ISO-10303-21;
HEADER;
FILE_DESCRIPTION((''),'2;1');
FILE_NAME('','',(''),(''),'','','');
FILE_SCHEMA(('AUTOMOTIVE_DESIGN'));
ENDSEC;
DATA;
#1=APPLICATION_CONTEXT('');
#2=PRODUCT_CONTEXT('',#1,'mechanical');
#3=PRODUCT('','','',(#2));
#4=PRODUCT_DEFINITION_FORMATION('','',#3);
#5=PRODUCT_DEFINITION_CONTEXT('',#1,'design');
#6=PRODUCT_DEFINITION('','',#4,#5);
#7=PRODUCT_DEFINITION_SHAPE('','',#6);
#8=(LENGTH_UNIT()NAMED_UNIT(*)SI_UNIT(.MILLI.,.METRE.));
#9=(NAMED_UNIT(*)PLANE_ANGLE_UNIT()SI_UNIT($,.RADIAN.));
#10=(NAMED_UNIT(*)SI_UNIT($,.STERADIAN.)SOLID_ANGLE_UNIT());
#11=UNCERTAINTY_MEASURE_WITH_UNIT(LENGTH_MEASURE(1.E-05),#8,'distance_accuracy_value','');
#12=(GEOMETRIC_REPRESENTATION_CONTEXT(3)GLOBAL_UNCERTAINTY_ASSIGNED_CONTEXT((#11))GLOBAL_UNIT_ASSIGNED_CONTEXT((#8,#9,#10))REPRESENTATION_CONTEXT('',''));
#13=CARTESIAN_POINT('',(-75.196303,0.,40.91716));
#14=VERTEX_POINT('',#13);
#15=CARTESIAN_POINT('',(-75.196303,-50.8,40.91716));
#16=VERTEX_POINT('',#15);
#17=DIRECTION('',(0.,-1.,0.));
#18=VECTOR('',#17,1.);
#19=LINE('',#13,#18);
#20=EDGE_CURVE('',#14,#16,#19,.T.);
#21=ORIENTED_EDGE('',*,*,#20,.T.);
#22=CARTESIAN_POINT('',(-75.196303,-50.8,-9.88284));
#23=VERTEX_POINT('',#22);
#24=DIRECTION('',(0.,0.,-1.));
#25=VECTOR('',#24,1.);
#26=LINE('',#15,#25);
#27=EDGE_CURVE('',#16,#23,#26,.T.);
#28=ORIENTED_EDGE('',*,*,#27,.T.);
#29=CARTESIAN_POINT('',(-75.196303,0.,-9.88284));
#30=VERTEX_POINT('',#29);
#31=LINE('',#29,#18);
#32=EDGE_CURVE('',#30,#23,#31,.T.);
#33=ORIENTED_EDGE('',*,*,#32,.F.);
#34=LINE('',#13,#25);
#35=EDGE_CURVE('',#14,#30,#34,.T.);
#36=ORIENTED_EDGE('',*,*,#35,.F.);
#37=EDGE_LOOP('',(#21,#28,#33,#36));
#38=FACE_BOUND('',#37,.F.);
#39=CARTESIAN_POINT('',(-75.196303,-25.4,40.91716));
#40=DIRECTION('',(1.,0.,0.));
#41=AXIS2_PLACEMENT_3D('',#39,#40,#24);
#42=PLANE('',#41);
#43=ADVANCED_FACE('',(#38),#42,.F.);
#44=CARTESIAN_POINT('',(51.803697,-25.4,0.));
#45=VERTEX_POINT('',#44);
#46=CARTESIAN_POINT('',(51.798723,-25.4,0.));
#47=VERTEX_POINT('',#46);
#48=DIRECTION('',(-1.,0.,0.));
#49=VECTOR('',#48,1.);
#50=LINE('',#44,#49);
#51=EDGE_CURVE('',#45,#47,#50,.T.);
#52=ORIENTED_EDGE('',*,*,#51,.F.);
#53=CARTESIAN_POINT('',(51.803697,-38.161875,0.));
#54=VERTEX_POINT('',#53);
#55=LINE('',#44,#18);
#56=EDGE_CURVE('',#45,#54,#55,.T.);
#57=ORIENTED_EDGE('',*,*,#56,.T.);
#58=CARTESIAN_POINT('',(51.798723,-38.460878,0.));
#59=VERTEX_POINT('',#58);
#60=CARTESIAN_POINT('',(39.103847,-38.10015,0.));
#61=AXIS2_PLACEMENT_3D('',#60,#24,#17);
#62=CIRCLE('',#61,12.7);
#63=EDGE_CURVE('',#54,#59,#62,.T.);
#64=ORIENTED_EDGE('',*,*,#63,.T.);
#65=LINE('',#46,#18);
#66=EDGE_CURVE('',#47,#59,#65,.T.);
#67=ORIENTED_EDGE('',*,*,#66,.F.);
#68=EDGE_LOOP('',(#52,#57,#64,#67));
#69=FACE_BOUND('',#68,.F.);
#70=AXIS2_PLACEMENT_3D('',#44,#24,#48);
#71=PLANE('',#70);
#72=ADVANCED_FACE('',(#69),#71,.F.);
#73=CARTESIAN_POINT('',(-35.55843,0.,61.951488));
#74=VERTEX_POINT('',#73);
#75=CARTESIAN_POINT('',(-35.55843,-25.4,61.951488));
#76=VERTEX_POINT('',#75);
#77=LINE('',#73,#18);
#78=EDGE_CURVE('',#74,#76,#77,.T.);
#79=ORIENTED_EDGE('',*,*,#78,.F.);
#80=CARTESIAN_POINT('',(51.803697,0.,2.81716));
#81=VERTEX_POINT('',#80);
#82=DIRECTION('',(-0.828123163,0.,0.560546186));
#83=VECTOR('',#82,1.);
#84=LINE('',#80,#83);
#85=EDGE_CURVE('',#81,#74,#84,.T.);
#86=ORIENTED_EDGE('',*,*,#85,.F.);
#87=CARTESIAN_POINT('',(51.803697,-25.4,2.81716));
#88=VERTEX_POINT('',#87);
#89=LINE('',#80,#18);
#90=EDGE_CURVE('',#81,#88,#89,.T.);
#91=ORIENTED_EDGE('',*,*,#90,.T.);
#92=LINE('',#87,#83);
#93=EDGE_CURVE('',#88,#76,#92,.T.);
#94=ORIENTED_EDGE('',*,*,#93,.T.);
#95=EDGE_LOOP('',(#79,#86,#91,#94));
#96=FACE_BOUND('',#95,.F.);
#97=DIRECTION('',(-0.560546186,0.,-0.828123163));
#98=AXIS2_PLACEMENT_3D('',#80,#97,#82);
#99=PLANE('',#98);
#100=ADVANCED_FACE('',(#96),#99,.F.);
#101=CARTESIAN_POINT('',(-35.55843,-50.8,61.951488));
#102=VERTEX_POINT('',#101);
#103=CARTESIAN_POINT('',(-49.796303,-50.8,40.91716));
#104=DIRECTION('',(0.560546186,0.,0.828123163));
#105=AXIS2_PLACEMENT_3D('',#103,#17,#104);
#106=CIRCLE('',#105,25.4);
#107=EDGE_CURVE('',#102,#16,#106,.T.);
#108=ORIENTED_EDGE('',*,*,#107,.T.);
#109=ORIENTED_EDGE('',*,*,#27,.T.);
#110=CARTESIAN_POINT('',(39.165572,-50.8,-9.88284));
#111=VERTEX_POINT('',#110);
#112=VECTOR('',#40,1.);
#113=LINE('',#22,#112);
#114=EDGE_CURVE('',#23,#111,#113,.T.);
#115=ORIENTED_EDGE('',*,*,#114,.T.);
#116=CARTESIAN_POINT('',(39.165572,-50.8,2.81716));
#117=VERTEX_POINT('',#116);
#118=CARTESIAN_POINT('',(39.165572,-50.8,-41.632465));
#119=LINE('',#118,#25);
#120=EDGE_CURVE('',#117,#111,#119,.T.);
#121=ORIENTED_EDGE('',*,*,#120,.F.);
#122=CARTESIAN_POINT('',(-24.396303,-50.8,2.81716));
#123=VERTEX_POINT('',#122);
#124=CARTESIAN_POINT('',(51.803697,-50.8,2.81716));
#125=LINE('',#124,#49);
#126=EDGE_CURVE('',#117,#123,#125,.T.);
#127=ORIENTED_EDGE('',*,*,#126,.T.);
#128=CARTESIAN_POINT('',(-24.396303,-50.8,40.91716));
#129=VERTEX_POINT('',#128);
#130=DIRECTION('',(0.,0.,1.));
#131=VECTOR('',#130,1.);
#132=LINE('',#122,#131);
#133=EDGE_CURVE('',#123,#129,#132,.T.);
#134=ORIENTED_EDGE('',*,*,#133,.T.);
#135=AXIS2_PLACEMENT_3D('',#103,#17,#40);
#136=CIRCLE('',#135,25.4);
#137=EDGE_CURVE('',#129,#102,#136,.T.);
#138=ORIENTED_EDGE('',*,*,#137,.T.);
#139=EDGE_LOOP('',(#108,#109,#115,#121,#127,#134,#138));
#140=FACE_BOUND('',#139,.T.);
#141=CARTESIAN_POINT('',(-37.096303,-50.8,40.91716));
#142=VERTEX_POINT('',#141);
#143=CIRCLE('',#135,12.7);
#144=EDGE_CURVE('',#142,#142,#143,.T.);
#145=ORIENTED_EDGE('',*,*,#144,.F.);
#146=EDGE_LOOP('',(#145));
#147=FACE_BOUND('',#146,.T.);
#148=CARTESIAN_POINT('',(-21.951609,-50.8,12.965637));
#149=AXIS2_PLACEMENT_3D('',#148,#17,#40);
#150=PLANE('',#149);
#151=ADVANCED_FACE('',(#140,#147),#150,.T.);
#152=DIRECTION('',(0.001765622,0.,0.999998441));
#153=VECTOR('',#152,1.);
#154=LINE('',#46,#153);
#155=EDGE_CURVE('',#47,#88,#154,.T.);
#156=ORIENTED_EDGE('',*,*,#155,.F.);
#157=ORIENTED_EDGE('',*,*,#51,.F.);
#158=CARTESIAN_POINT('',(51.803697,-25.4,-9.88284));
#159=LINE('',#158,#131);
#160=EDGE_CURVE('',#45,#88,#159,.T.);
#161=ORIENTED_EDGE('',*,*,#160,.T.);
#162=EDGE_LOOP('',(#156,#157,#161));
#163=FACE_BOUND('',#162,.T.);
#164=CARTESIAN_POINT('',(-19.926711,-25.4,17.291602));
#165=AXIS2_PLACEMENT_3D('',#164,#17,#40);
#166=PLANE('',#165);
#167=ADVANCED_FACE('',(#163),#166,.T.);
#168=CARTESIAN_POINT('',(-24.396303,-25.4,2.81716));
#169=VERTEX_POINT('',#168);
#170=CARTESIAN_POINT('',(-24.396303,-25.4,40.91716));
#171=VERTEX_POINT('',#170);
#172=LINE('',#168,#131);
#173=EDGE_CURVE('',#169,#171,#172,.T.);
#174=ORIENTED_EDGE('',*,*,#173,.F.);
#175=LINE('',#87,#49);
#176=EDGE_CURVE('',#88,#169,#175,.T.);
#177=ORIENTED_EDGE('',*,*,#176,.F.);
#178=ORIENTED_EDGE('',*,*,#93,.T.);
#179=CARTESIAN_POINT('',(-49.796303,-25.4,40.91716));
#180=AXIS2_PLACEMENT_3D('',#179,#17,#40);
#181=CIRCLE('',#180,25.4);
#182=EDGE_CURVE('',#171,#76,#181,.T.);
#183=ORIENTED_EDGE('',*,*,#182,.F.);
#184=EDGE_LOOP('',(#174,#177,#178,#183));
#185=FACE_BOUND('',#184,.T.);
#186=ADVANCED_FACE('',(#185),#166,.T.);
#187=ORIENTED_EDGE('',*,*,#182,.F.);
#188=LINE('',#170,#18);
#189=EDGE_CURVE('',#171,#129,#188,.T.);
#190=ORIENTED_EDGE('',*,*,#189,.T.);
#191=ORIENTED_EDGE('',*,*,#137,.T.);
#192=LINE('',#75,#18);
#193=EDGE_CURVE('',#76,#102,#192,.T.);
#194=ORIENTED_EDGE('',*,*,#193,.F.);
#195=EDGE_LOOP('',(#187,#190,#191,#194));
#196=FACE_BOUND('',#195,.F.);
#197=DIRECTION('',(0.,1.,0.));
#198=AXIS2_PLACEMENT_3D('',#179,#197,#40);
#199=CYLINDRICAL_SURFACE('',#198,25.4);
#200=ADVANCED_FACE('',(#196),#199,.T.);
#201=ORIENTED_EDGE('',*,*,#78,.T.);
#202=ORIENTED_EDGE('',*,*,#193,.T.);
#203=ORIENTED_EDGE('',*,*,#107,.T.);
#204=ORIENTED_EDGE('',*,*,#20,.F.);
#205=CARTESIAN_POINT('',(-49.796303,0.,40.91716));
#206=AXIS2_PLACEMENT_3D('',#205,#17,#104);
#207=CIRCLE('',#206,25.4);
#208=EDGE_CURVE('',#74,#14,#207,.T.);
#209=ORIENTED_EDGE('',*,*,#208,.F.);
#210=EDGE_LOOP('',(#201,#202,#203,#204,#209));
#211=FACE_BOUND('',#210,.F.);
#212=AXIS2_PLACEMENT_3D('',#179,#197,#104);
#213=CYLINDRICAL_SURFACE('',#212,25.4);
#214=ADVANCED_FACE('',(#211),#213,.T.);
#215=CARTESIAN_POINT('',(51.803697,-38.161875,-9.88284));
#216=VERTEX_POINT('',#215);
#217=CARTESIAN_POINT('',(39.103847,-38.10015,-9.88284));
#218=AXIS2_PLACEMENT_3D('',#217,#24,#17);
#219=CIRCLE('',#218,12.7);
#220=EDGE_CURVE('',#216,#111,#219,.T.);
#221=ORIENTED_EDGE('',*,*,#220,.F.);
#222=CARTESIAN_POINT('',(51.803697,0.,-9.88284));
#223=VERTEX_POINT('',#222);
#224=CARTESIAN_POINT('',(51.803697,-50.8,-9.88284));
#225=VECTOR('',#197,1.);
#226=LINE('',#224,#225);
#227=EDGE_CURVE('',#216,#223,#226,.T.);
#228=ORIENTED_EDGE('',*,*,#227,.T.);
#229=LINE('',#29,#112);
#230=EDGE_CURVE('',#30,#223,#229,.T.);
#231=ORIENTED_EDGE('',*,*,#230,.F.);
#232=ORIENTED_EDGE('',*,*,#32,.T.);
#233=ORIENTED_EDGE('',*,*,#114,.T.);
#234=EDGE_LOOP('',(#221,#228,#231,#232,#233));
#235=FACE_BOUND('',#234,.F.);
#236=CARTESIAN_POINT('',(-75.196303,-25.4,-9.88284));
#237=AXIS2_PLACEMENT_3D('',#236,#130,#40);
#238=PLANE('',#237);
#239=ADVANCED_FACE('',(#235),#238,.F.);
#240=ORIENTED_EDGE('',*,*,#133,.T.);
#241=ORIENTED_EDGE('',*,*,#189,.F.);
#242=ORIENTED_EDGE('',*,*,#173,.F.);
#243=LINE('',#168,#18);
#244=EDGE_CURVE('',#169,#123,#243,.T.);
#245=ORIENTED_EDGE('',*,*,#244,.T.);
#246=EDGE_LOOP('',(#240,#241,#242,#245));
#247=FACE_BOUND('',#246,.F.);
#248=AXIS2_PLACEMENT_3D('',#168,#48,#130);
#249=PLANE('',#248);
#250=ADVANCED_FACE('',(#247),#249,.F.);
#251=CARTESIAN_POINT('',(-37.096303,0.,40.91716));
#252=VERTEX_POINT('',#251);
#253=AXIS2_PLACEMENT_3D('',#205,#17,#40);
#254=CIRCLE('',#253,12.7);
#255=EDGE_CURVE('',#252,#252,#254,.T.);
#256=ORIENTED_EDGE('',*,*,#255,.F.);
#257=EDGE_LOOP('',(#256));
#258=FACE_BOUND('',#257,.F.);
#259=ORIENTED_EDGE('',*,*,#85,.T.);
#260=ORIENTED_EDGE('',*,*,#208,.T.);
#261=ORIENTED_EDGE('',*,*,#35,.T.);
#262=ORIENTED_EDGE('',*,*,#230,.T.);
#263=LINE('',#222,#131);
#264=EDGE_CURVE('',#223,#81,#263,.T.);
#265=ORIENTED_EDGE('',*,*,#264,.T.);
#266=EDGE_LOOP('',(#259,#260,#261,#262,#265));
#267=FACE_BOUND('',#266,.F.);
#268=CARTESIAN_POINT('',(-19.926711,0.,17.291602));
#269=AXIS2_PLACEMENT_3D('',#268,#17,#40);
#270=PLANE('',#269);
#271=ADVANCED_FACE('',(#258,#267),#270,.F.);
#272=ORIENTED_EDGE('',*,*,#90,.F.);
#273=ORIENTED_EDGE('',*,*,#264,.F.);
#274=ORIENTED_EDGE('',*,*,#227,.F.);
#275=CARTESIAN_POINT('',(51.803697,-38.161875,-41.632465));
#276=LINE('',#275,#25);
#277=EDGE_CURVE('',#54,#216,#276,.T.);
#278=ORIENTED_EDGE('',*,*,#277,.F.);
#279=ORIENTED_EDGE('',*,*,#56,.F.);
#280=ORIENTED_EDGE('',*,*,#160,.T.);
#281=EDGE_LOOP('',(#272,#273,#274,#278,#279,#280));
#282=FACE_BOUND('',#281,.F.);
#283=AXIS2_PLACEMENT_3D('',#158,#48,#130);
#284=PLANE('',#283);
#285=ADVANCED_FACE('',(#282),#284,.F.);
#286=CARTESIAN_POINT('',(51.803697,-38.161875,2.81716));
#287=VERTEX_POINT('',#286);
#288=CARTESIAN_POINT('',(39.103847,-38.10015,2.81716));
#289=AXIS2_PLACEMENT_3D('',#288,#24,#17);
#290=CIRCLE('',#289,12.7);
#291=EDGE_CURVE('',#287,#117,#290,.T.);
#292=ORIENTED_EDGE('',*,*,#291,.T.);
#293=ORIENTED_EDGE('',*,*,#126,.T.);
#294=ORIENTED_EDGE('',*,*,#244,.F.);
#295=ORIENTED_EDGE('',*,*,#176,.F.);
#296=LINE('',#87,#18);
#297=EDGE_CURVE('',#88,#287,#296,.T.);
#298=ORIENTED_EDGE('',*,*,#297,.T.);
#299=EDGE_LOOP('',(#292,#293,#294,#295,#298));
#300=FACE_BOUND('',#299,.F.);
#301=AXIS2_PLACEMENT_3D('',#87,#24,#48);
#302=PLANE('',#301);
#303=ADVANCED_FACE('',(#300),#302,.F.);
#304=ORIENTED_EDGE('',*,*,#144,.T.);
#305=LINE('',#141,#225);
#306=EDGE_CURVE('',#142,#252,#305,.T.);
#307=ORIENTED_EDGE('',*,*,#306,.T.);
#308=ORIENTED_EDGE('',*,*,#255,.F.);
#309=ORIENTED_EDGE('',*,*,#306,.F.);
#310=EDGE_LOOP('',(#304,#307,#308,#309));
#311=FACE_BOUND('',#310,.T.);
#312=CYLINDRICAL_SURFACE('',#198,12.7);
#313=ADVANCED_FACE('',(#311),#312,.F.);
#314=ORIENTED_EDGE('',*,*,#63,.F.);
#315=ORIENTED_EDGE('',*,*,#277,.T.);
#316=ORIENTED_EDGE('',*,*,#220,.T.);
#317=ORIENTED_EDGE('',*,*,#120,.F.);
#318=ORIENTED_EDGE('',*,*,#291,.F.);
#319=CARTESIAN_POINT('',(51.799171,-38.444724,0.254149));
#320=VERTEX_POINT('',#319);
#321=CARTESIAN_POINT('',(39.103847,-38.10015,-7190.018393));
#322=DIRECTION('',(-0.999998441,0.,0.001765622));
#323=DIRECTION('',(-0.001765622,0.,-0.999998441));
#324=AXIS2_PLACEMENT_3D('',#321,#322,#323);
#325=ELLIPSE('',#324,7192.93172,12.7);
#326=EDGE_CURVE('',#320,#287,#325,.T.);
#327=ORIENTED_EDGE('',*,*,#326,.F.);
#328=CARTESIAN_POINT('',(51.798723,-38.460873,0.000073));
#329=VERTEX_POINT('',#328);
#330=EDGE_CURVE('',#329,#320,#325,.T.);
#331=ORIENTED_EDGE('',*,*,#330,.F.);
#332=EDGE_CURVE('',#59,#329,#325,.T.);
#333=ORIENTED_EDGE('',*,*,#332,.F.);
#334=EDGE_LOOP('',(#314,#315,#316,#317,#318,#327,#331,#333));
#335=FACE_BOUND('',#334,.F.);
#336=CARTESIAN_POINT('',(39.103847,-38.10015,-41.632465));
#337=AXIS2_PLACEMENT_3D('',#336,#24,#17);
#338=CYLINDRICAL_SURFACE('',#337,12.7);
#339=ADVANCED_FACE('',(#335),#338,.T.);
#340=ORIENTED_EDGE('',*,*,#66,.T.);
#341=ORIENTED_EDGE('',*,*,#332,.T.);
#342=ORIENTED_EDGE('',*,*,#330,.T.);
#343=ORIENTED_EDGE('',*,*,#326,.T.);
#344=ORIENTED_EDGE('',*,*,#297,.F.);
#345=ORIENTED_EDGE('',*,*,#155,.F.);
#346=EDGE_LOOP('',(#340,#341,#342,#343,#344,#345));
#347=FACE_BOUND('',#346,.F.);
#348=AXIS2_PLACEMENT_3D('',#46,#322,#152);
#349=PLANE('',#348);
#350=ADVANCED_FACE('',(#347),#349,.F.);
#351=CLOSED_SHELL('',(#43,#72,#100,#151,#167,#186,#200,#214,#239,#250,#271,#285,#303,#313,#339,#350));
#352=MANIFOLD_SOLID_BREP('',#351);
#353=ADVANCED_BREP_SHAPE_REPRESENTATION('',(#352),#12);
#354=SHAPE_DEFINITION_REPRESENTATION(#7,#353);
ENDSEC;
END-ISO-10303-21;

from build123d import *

# Parameters (mm, degrees)
F0_R        = 12.7
F1_DEPTH    = 25.4
F2_R        = 12.7
F3_DEPTH    = 25.4
F4_T1_DEPTH = 73.3820900713
F4_T6_DEPTH = 61.9223878104


# Not quite as in the source:
# - a fillet or chamfer that OpenCascade refuses, or shapes differently, is made with other operations: its cross-section is extruded or revolved along the edge and cut away or added


with BuildPart() as f1:
    # F0 (on Front) → F1 (new body)
    with BuildSketch(Plane.XZ):
        with BuildLine():
            Line((51.8036965728, 2.8171599331), (-35.5584302991, 61.9514882749))
            ThreePointArc((-35.5584302991, 61.9514882749), (-61.7025627589, 63.353759246), (-75.1963034272, 40.9171599331))
            Line((-75.1963034272, 40.9171599331), (-75.1963034272, -9.8828400669))
            Line((-75.1963034272, -9.8828400669), (51.8036965728, -9.8828400669))
            Line((51.8036965728, -9.8828400669), (51.8036965728, 2.8171599331))
        make_face()
        with Locations((-49.7963034272, 40.9171599331)):
            Circle(F0_R, mode=Mode.SUBTRACT)
    extrude(amount=F1_DEPTH)

    # F2 (on face) → F3 (join)
    with BuildSketch(Plane.XZ.offset(25.4)):
        with BuildLine():
            Line((-24.3963034272, 2.8171599331), (-24.3963034272, 40.9171599331))
            ThreePointArc((-24.3963034272, 40.9171599331), (-27.3597041143, 52.8234192648), (-35.5584302991, 61.9514882749))
            ThreePointArc((-35.5584302991, 61.9514882749), (-61.7025627589, 63.353759246), (-75.1963034272, 40.9171599331))
            Line((-75.1963034272, 40.9171599331), (-75.1963034272, 0))
            Line((-75.1963034272, 0), (-75.1963034272, -9.8828400669))
            Line((-75.1963034272, -9.8828400669), (51.8036965728, -9.8828400669))
            Line((51.8036965728, -9.8828400669), (51.8036965728, -0.3670600709))
            Line((51.8036965728, -0.3670600709), (51.8036965728, 0))
            Line((51.8036965728, 0), (51.7987225249, 0))
            Line((51.7987225249, 0), (51.8036965728, 2.8171599331))
            Line((51.8036965728, 2.8171599331), (-24.3963034272, 2.8171599331))
        make_face()
        with Locations((-49.7963034272, 40.9171599331)):
            Circle(F2_R, mode=Mode.SUBTRACT)
    extrude(amount=F3_DEPTH)

    # F4: fillet of radius 12.7 on 2 edges, made by hand

    # F4_s2 → F4_t1 (cut)
    with BuildSketch(Plane.XY.offset(-41.6324650691)):
        with BuildLine():
            ThreePointArc((39.1038465728, -50.80015), (48.0841026938, -47.0804061211), (51.8038465728, -38.10015))
            Line((51.8038465728, -38.10015), (52.0578465728, -38.10015))
            ThreePointArc((52.0578465728, -38.10015), (52.0576965728, -44.450075), (52.0576965728, -50.8))
            Line((52.0576965728, -50.8), (51.8036965728, -51.054))
            ThreePointArc((51.8036965728, -51.054), (45.4537715728, -51.054), (39.1038465728, -51.05415))
            Line((39.1038465728, -51.05415), (39.1038465728, -50.80015))
        make_face()
    extrude(amount=F4_T1_DEPTH, mode=Mode.SUBTRACT)


with BuildPart() as f4_tool4:
    # F4_s5 → F4_t6 (new body)
    with BuildSketch(Plane.YZ.offset(82.762403454)):
        with BuildLine():
            ThreePointArc((-50.8001462633, -9.8828067947), (-46.3384346707, -2.7734597017), (-38.4165172484, 0.00015))
            Line((-38.4165172484, 0.00015), (-38.4165172484, 0.25415))
            ThreePointArc((-38.4165172484, 0.25415), (-44.6082586242, 0.254), (-50.8, 0.254))
            Line((-50.8, 0.254), (-51.054, 0))
            ThreePointArc((-51.054, 0), (-51.054, -4.9414033973), (-51.0478188436, -9.8264659306))
            Line((-51.0478188436, -9.8264659306), (-50.8001462633, -9.8828067947))
        make_face()
    extrude(amount=-F4_T6_DEPTH)

    split(bisect_by=Plane(origin=(51.7985610464, 0, -0.0914568329), x_dir=(0, 1, 0), z_dir=(0.9999984413, 0, -0.0017656222)), keep=Keep.TOP)


with BuildPart() as f1_1:
    add(f1.part)

    # F4_t3: cut F4_tool4
    add(f4_tool4.part, mode=Mode.SUBTRACT)


solid = f1_1.part
